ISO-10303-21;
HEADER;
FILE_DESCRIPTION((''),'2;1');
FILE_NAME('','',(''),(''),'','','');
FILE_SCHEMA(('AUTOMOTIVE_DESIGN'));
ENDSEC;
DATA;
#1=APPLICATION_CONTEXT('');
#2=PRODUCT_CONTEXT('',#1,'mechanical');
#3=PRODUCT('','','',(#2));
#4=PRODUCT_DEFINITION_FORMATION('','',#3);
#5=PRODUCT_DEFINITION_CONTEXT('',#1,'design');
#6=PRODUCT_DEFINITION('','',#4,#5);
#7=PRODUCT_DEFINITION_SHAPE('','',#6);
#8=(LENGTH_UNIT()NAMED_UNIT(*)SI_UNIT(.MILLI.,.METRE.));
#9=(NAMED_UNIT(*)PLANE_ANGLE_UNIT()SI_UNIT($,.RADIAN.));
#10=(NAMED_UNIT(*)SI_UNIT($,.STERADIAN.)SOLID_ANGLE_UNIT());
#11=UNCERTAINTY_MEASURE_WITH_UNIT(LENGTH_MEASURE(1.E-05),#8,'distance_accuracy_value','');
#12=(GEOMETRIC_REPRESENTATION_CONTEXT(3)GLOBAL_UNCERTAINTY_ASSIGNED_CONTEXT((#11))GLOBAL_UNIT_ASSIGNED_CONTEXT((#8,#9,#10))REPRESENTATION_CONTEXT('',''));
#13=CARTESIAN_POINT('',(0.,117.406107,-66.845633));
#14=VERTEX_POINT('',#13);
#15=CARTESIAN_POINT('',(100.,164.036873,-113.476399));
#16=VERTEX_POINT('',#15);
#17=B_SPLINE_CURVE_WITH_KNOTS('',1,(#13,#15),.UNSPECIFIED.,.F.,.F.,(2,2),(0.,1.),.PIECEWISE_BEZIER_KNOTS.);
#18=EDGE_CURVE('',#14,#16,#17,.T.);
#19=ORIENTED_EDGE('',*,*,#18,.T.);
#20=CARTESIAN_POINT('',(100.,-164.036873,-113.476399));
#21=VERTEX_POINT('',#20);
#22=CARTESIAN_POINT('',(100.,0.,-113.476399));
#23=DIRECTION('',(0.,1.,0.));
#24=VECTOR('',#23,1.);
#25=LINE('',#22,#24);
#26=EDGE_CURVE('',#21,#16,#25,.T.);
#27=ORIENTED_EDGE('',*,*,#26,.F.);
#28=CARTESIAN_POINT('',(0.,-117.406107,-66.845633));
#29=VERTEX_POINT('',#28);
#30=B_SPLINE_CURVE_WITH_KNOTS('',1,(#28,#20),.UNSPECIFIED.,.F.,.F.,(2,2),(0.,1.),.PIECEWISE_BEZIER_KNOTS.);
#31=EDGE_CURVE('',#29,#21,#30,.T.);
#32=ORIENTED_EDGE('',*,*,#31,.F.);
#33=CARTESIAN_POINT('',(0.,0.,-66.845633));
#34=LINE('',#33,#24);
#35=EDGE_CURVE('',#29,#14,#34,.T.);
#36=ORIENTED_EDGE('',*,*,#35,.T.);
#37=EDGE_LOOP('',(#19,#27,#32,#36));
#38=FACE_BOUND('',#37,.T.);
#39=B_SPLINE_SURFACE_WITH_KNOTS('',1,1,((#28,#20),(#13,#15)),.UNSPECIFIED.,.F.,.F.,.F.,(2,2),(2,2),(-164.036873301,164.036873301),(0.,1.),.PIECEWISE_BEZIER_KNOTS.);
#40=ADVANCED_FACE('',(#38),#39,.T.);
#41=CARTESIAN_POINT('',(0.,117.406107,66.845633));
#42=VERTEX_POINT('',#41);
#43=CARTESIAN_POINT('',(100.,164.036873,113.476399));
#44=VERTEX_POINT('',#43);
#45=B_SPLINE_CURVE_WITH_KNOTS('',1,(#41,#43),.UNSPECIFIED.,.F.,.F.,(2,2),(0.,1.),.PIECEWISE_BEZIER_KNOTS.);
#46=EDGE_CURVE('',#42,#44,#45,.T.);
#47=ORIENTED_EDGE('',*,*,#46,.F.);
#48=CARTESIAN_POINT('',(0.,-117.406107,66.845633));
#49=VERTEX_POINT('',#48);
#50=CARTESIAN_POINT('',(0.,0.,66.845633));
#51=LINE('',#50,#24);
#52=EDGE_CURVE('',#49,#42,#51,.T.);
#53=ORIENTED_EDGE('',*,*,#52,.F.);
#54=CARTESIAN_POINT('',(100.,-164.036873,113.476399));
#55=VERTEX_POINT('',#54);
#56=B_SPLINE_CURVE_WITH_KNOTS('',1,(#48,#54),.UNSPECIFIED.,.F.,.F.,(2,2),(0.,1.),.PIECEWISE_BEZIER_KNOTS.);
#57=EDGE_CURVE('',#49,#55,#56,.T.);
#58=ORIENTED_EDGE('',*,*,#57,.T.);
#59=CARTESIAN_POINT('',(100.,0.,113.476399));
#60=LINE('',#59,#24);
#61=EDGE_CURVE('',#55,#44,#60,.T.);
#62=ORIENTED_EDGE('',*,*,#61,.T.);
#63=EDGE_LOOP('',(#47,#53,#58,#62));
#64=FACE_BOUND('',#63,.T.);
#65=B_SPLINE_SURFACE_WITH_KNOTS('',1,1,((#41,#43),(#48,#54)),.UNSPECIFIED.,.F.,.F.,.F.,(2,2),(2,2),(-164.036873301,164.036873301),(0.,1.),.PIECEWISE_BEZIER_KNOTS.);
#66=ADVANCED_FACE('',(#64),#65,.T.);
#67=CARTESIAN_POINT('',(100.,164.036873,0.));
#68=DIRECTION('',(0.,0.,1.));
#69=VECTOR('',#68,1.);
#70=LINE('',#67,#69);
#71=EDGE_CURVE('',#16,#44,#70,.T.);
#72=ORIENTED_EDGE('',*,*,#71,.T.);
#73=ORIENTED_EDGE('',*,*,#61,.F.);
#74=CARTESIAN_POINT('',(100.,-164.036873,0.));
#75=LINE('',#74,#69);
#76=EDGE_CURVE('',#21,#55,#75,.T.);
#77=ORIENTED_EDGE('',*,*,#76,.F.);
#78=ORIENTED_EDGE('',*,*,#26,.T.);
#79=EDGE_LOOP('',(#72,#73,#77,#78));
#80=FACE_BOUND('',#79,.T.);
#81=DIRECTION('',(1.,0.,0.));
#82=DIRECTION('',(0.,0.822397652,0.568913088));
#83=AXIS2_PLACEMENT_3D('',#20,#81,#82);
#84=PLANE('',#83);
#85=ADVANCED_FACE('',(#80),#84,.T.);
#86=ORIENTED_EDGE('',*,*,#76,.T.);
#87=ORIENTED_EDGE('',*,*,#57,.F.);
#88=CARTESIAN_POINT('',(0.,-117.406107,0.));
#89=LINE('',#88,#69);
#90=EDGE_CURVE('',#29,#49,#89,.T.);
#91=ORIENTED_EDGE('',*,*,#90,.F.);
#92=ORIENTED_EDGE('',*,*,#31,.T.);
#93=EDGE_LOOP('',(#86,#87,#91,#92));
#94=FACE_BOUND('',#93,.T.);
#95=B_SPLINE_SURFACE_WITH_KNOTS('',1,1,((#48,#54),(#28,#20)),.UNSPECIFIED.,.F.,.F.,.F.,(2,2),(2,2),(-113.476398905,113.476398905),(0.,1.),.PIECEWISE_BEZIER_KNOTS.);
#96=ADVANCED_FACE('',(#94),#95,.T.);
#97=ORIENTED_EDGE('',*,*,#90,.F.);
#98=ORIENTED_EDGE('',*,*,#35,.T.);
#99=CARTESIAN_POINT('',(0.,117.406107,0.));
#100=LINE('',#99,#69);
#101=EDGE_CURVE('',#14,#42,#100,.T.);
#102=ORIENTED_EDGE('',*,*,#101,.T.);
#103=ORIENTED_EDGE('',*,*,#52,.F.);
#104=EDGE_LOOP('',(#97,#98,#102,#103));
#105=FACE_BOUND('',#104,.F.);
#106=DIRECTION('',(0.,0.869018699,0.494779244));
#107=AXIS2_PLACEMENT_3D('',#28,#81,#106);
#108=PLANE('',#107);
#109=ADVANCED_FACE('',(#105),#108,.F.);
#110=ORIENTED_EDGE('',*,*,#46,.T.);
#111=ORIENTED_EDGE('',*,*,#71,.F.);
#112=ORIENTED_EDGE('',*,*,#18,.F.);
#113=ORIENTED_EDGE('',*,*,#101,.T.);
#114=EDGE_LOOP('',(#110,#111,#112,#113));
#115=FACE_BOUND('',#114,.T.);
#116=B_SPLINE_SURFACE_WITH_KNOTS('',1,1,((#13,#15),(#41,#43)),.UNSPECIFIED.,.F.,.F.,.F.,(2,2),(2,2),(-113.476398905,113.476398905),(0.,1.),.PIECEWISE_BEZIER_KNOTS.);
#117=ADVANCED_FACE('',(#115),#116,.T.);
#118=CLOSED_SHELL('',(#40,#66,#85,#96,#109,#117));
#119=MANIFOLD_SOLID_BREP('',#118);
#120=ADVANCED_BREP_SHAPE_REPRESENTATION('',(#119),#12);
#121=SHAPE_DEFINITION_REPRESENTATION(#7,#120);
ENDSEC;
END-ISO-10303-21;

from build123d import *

# Parameters (mm, degrees)
F0_W     = 234.8122149706
F0_H     = 133.6912661791
F1_DEPTH = 100
F1_TAPER = -25


with BuildPart() as f1:
    # F0 (on Right) → F1 (new body)
    with BuildSketch(Plane.YZ):
        Rectangle(F0_W, F0_H)
    extrude(amount=F1_DEPTH, taper=F1_TAPER)


solid = f1.part
